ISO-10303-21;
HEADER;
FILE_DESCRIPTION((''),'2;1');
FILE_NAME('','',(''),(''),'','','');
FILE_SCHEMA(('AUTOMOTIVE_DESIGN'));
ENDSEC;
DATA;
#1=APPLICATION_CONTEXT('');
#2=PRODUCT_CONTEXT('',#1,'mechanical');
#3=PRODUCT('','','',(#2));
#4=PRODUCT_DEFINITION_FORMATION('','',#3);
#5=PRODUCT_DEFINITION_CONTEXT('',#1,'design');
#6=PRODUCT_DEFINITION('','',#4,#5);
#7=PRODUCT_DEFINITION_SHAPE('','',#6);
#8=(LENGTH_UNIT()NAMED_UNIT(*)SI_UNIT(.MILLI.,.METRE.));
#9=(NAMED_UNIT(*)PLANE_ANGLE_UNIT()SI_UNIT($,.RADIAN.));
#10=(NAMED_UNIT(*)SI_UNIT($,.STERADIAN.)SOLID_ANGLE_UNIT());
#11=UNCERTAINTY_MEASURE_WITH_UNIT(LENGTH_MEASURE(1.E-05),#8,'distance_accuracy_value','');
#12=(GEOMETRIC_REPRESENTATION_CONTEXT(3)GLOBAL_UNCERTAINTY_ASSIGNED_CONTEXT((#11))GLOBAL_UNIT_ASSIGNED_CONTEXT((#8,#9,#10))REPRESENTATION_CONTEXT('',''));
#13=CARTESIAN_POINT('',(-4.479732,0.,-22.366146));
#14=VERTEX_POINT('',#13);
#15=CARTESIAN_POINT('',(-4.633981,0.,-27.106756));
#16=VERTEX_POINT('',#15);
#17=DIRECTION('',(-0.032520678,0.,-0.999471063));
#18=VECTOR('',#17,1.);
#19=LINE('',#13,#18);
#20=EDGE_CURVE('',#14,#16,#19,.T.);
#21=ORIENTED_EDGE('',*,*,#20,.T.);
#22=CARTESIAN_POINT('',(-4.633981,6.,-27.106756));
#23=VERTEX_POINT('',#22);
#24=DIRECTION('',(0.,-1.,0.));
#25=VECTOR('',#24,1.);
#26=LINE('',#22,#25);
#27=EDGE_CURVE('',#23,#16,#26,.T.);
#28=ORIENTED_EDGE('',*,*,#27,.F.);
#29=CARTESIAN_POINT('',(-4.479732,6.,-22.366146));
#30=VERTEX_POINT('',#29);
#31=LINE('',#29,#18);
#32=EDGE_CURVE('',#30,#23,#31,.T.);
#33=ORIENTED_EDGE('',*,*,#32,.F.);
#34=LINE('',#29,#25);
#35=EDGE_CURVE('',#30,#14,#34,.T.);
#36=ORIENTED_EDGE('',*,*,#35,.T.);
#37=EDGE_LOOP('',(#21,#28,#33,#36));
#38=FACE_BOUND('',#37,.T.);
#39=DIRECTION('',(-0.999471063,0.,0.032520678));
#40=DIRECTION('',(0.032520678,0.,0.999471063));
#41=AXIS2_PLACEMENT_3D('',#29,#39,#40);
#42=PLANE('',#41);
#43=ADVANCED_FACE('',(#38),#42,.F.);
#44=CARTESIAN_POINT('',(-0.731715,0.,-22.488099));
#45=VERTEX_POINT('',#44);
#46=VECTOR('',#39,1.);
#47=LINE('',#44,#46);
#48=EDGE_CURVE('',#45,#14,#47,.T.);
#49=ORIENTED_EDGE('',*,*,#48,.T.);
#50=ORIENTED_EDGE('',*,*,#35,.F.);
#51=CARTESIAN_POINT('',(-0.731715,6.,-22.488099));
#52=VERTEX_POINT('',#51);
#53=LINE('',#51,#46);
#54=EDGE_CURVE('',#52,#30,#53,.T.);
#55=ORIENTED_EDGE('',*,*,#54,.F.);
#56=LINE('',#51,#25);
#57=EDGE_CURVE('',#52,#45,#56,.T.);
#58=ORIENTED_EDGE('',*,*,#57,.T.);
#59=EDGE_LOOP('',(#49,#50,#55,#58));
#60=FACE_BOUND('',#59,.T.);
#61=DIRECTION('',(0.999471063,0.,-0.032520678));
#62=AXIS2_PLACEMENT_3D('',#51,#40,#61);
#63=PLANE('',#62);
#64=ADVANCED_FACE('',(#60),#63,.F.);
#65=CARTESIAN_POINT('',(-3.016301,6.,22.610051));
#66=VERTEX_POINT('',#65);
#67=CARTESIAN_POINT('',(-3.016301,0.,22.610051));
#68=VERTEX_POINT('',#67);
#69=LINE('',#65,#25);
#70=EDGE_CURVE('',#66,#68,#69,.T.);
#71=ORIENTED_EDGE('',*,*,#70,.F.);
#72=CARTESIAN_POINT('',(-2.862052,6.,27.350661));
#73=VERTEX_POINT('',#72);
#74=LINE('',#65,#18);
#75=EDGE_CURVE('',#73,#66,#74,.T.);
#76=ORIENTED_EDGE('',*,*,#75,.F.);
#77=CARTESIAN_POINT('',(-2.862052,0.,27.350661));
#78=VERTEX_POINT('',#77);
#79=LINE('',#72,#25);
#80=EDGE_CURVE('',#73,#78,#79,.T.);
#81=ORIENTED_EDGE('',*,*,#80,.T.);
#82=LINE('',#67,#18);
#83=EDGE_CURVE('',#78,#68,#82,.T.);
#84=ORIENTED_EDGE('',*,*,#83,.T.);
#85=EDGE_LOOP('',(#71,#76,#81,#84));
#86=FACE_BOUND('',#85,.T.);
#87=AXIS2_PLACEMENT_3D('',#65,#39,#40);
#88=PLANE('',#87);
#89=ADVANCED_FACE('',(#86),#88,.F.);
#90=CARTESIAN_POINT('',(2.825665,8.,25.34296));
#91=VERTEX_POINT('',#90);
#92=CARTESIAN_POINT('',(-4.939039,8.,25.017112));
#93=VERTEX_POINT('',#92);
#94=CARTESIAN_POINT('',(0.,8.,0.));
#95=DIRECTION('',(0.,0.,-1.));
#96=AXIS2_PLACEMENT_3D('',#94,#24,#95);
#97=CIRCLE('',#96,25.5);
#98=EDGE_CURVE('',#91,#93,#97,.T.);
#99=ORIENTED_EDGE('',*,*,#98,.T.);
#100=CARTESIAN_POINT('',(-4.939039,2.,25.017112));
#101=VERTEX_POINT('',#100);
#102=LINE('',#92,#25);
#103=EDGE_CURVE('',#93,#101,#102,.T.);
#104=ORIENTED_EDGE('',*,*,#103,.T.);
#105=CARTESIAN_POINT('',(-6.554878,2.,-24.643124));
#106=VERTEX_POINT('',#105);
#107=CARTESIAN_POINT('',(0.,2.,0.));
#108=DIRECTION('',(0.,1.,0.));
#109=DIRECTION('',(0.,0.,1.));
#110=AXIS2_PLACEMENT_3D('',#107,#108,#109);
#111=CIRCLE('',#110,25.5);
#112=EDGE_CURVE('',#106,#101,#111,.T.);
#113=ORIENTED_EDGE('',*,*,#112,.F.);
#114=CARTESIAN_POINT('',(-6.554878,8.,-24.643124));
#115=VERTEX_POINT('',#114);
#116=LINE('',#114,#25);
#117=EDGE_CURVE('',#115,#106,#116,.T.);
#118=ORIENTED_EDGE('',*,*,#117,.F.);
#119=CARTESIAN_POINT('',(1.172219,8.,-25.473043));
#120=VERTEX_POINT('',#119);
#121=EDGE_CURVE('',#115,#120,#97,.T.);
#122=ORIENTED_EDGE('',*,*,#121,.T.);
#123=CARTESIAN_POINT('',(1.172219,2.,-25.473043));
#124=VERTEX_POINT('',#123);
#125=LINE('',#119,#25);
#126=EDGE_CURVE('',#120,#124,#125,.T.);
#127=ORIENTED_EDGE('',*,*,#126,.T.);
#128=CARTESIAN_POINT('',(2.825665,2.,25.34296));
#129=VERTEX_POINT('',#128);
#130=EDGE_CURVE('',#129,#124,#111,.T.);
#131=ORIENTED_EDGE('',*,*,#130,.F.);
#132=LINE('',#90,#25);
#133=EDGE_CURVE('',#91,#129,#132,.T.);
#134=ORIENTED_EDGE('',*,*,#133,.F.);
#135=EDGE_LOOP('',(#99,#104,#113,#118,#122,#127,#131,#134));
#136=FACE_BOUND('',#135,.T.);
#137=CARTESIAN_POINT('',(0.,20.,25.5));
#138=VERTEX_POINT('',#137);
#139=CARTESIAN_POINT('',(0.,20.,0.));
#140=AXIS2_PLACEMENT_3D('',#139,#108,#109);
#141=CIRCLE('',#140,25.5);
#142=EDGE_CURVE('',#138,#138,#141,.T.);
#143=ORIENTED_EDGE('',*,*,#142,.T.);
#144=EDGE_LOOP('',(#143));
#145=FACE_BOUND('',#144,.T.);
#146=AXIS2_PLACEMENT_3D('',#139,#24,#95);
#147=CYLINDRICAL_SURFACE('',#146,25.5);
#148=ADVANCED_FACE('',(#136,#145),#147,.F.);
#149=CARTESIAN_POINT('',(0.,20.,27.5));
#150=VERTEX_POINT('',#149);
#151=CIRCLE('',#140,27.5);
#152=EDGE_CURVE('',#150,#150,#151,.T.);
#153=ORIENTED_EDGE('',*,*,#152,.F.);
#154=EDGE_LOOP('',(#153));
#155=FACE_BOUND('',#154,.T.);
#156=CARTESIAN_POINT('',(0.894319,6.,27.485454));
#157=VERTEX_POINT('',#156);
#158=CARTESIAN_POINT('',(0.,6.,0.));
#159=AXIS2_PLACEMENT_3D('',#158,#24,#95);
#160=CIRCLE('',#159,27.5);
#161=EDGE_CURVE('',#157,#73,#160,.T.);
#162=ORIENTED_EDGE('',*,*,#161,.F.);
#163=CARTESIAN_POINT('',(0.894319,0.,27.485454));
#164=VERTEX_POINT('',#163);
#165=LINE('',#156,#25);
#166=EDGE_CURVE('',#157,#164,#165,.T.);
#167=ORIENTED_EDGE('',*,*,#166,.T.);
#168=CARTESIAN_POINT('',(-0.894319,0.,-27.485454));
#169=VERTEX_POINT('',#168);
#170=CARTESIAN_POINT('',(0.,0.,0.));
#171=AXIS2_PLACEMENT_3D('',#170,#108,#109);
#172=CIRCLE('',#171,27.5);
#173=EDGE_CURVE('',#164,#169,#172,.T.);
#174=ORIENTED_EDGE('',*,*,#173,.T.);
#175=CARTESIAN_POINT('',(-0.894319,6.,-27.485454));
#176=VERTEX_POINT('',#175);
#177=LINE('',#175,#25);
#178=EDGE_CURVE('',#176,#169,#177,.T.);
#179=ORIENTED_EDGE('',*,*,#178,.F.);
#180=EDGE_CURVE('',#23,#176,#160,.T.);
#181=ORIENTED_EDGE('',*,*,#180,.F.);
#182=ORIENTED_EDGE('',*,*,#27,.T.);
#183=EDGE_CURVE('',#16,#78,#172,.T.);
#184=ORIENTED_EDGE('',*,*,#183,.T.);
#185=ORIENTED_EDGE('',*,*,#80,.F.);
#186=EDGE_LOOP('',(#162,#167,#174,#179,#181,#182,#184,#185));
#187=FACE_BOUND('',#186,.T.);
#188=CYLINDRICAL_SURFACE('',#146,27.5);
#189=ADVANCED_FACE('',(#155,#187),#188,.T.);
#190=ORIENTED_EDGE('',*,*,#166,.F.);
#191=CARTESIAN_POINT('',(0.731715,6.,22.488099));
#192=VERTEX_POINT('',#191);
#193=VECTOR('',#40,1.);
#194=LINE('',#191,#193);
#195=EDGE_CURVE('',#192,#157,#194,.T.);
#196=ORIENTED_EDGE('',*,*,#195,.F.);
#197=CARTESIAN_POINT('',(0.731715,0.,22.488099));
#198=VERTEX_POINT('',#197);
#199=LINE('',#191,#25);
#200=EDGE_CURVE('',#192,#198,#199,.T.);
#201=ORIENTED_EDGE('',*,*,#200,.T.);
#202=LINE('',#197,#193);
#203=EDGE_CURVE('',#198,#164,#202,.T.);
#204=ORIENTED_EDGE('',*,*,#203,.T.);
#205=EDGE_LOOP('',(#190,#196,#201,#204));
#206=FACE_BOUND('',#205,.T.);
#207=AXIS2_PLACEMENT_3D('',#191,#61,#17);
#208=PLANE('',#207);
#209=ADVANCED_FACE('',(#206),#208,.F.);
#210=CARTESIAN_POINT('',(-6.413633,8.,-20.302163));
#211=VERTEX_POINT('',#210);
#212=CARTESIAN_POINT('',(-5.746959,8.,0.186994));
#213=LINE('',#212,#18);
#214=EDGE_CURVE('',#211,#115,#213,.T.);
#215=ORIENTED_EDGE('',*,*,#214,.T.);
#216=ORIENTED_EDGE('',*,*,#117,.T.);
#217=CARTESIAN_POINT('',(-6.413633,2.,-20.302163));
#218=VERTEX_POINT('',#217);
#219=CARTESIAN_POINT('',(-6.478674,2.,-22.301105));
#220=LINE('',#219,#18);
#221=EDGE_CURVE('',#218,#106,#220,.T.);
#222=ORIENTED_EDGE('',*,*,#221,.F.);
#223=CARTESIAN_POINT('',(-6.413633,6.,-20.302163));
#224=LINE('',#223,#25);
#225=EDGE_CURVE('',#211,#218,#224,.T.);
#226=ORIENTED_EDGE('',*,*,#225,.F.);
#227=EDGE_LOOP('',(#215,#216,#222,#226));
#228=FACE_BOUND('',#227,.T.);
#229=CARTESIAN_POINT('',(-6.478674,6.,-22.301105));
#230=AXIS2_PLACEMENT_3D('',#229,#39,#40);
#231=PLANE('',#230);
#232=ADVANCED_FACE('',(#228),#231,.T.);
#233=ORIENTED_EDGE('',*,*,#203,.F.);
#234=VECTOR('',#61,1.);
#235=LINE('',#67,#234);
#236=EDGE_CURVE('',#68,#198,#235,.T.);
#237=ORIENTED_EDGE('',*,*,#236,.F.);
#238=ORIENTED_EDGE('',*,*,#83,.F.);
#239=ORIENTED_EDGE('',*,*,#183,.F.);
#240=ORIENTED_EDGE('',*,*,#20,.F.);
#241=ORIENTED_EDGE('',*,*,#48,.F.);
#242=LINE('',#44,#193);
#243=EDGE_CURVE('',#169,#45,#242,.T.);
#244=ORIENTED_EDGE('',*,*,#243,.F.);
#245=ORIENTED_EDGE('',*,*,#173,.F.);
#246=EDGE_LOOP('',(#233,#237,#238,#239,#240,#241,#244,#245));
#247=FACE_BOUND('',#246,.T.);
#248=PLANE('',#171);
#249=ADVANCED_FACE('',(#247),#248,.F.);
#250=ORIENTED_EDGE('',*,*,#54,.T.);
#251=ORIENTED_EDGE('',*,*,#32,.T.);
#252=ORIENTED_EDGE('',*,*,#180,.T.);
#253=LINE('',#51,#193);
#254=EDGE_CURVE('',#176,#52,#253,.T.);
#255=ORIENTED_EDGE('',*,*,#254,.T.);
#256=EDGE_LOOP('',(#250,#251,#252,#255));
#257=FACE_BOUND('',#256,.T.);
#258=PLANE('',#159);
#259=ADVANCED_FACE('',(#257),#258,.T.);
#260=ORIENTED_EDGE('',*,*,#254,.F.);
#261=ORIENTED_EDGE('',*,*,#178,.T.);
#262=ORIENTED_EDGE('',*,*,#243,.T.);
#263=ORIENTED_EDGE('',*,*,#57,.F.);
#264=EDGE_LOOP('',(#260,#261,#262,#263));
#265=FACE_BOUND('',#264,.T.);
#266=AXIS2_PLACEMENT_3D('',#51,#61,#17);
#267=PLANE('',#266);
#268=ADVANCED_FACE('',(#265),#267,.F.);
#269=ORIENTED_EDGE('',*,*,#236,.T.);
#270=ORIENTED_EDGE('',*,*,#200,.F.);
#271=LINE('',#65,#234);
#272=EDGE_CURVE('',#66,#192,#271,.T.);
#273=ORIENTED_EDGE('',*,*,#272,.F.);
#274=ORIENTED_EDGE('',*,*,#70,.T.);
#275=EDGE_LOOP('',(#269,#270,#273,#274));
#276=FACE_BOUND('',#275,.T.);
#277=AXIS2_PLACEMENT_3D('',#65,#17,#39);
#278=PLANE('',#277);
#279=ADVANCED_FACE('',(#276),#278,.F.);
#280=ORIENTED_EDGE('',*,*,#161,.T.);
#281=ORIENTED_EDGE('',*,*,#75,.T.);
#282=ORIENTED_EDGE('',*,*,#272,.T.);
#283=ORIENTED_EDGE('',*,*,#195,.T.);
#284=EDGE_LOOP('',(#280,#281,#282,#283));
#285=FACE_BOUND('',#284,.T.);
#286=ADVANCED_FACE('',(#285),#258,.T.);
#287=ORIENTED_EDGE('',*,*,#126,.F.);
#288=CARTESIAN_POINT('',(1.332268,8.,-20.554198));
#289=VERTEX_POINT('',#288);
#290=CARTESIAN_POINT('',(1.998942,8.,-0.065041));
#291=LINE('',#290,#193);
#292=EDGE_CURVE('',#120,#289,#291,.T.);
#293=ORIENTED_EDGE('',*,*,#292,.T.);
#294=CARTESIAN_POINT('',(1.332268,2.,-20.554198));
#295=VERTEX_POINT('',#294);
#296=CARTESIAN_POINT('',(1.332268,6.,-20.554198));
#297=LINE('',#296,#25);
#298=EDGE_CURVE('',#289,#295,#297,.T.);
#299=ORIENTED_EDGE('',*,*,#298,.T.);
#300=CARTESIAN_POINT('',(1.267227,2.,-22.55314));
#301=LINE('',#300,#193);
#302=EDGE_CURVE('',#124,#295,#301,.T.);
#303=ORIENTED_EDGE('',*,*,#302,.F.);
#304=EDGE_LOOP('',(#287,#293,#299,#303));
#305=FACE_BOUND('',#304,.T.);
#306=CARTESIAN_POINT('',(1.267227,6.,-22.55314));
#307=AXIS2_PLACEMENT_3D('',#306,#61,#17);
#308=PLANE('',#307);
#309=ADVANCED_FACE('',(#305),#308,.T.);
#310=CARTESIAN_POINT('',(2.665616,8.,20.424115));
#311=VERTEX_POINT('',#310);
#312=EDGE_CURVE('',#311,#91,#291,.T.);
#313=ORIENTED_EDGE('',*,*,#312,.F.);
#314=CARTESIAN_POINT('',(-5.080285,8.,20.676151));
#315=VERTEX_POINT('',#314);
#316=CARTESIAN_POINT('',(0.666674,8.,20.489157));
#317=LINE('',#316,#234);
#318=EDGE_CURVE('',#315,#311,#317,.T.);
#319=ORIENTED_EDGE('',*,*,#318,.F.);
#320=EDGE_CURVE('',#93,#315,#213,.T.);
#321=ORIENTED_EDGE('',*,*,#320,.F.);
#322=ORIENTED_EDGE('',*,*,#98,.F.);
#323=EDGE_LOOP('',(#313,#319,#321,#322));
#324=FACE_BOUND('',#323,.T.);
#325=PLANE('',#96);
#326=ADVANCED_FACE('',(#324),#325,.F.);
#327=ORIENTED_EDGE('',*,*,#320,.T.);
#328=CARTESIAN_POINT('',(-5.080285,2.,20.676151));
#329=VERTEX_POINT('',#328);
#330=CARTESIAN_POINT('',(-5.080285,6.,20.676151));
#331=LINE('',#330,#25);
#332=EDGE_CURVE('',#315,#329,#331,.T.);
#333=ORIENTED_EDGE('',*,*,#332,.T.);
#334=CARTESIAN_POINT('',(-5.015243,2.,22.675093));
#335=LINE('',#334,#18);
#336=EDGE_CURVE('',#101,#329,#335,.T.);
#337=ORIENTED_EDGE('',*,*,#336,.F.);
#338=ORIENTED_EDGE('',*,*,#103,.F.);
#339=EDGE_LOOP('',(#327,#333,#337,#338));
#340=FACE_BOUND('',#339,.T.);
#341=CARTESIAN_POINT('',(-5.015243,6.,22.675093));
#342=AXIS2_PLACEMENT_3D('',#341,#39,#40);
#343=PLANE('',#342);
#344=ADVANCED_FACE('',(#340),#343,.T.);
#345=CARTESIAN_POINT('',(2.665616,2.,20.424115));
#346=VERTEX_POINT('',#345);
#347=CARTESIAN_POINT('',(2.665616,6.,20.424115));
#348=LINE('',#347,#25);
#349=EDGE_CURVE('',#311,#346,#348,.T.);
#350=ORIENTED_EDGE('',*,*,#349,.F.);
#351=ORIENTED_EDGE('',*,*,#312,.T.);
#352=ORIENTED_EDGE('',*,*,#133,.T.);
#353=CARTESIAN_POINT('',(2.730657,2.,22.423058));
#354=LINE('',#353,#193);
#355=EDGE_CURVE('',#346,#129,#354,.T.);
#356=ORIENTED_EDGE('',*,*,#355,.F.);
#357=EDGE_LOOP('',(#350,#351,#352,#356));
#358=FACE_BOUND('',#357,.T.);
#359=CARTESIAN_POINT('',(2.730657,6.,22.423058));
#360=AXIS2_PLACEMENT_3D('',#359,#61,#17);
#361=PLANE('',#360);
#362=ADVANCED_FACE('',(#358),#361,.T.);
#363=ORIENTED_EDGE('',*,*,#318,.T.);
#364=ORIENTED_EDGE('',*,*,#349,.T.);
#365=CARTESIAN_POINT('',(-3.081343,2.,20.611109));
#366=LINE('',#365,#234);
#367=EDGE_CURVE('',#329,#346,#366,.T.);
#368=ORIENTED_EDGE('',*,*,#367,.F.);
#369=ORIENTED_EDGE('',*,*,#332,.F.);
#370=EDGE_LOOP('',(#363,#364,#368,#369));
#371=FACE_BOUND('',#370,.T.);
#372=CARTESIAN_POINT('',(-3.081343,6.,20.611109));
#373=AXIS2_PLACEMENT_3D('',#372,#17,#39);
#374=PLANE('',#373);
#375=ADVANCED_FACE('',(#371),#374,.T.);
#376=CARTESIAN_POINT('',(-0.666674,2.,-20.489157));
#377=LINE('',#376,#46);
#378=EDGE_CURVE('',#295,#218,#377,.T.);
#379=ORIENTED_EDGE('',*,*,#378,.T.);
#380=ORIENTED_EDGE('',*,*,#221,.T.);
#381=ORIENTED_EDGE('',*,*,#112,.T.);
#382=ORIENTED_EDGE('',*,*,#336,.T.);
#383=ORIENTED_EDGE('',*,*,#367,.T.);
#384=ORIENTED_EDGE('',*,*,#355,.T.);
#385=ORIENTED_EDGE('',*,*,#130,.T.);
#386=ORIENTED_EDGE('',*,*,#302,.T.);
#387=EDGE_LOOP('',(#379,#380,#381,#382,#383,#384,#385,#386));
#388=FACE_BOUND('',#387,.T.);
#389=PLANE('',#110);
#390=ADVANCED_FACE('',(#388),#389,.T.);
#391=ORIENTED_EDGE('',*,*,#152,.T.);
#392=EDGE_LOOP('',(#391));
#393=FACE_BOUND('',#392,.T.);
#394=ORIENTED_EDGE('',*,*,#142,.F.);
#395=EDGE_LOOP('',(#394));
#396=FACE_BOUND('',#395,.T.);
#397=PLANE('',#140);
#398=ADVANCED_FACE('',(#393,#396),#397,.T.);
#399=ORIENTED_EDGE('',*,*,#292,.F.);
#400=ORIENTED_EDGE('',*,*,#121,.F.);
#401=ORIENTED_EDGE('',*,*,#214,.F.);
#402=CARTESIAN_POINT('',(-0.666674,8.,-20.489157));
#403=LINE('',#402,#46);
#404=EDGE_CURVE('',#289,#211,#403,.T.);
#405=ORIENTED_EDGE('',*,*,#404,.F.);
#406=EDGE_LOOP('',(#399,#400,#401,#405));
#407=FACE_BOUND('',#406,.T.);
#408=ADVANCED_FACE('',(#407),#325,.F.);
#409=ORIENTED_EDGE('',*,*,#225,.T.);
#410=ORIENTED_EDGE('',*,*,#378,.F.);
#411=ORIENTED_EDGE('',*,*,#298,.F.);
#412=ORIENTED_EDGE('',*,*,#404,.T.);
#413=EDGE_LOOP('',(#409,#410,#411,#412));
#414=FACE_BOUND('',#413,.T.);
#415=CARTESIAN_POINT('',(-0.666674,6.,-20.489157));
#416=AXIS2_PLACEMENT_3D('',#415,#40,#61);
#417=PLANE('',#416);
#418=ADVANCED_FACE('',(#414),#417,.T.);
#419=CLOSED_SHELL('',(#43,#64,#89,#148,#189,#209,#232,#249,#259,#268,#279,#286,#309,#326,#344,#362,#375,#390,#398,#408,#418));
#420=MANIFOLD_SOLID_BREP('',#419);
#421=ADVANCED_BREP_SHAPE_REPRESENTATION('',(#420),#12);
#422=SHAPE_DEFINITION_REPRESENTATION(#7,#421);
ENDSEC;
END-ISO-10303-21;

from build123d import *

# Parameters (mm, degrees)
CROQUIS1_R              = 27.5
SALIENTE_EXTRUIR1_DEPTH = 20
CORTAR_EXTRUIR1_DEPTH   = 6
VACIADO3_START          = 2
VACIADO3_DEPTH          = 18
VACIADO3_START_2        = 8
VACIADO3_2_DEPTH        = 12


# Read off the part's stored shape, not the designer's step: Vaciado3
with BuildPart() as part:
    # Croquis1 → Saliente-Extruir1 (new body)
    with BuildSketch(Plane(origin=(0, 0, 0), x_dir=(1, 0, 0), z_dir=(0, 1, 0))):
        with Locations(Location((0, 0, 0), (0, 0, 270))):
            Circle(CROQUIS1_R)
    extrude(amount=SALIENTE_EXTRUIR1_DEPTH)

    # Croquis2 → Cortar-Extruir1 (cut)
    with BuildSketch(Plane(origin=(0, 0, 0), x_dir=(-1, 0, 0), z_dir=(0, -1, 0))):
        with BuildLine():
            Line((3.016301233, -22.610051457), (2.862051808, -27.350661042))
            ThreePointArc((2.862051808, -27.350661042), (0.986172274, -27.482311843), (-0.894318642, -27.485454229))
            Line((-0.894318642, -27.485454229), (-0.731715252, -22.488098915))
            Line((-0.731715252, -22.488098915), (3.016301233, -22.610051457))
        make_face()
        with BuildLine():
            Line((0.731715252, 22.488098915), (4.479731738, 22.366146372))
            Line((4.479731738, 22.366146372), (4.633981164, 27.106755958))
            ThreePointArc((4.633981164, 27.106755958), (2.770627687, 27.360073505), (0.894318642, 27.485454229))
            Line((0.894318642, 27.485454229), (0.731715252, 22.488098915))
        make_face()
    extrude(amount=-CORTAR_EXTRUIR1_DEPTH, mode=Mode.SUBTRACT)

    # Vaciado3 outline → Vaciado3 (cut)
    with BuildSketch(Plane(origin=(0, 0, 0), x_dir=(1, 0, 0), z_dir=(0, 1, 0)).offset(VACIADO3_START)):
        with BuildLine():
            ThreePointArc((2.825664836, -25.342959934), (25.486512103, 0.829277286), (1.172219416, 25.473042646))
            Line((1.172219416, 25.473042646), (1.332268229, 20.554198145))
            Line((1.332268229, 20.554198145), (-6.413632508, 20.302162891))
            Line((-6.413632508, 20.302162891), (-6.554878223, 24.643124223))
            ThreePointArc((-6.554878223, 24.643124223), (-25.486512103, -0.829277286), (-4.939039, -25.017112019))
            Line((-4.939039, -25.017112019), (-5.080284715, -20.676150687))
            Line((-5.080284715, -20.676150687), (2.665616022, -20.424115433))
            Line((2.665616022, -20.424115433), (2.825664836, -25.342959934))
        make_face()
    extrude(amount=VACIADO3_DEPTH, mode=Mode.SUBTRACT)

    # Vaciado3 2 outline → Vaciado3 2 (cut)
    with BuildSketch(Plane(origin=(0, 0, 0), x_dir=(1, 0, 0), z_dir=(0, 1, 0)).offset(VACIADO3_START_2)):
        with BuildLine():
            Line((1.332268229, 20.554198145), (1.172219416, 25.473042646))
            ThreePointArc((1.172219416, 25.473042646), (-2.723131489, 25.354182197), (-6.554878223, 24.643124223))
            Line((-6.554878223, 24.643124223), (-6.413632508, 20.302162891))
            Line((-6.413632508, 20.302162891), (1.332268229, 20.554198145))
        make_face()
        with BuildLine():
            ThreePointArc((-4.939039, -25.017112019), (-1.069173421, -25.477575791), (2.825664836, -25.342959934))
            Line((2.825664836, -25.342959934), (2.665616022, -20.424115433))
            Line((2.665616022, -20.424115433), (-5.080284715, -20.676150687))
            Line((-5.080284715, -20.676150687), (-4.939039, -25.017112019))
        make_face()
    extrude(amount=VACIADO3_2_DEPTH, mode=Mode.SUBTRACT)


solid = part.part
